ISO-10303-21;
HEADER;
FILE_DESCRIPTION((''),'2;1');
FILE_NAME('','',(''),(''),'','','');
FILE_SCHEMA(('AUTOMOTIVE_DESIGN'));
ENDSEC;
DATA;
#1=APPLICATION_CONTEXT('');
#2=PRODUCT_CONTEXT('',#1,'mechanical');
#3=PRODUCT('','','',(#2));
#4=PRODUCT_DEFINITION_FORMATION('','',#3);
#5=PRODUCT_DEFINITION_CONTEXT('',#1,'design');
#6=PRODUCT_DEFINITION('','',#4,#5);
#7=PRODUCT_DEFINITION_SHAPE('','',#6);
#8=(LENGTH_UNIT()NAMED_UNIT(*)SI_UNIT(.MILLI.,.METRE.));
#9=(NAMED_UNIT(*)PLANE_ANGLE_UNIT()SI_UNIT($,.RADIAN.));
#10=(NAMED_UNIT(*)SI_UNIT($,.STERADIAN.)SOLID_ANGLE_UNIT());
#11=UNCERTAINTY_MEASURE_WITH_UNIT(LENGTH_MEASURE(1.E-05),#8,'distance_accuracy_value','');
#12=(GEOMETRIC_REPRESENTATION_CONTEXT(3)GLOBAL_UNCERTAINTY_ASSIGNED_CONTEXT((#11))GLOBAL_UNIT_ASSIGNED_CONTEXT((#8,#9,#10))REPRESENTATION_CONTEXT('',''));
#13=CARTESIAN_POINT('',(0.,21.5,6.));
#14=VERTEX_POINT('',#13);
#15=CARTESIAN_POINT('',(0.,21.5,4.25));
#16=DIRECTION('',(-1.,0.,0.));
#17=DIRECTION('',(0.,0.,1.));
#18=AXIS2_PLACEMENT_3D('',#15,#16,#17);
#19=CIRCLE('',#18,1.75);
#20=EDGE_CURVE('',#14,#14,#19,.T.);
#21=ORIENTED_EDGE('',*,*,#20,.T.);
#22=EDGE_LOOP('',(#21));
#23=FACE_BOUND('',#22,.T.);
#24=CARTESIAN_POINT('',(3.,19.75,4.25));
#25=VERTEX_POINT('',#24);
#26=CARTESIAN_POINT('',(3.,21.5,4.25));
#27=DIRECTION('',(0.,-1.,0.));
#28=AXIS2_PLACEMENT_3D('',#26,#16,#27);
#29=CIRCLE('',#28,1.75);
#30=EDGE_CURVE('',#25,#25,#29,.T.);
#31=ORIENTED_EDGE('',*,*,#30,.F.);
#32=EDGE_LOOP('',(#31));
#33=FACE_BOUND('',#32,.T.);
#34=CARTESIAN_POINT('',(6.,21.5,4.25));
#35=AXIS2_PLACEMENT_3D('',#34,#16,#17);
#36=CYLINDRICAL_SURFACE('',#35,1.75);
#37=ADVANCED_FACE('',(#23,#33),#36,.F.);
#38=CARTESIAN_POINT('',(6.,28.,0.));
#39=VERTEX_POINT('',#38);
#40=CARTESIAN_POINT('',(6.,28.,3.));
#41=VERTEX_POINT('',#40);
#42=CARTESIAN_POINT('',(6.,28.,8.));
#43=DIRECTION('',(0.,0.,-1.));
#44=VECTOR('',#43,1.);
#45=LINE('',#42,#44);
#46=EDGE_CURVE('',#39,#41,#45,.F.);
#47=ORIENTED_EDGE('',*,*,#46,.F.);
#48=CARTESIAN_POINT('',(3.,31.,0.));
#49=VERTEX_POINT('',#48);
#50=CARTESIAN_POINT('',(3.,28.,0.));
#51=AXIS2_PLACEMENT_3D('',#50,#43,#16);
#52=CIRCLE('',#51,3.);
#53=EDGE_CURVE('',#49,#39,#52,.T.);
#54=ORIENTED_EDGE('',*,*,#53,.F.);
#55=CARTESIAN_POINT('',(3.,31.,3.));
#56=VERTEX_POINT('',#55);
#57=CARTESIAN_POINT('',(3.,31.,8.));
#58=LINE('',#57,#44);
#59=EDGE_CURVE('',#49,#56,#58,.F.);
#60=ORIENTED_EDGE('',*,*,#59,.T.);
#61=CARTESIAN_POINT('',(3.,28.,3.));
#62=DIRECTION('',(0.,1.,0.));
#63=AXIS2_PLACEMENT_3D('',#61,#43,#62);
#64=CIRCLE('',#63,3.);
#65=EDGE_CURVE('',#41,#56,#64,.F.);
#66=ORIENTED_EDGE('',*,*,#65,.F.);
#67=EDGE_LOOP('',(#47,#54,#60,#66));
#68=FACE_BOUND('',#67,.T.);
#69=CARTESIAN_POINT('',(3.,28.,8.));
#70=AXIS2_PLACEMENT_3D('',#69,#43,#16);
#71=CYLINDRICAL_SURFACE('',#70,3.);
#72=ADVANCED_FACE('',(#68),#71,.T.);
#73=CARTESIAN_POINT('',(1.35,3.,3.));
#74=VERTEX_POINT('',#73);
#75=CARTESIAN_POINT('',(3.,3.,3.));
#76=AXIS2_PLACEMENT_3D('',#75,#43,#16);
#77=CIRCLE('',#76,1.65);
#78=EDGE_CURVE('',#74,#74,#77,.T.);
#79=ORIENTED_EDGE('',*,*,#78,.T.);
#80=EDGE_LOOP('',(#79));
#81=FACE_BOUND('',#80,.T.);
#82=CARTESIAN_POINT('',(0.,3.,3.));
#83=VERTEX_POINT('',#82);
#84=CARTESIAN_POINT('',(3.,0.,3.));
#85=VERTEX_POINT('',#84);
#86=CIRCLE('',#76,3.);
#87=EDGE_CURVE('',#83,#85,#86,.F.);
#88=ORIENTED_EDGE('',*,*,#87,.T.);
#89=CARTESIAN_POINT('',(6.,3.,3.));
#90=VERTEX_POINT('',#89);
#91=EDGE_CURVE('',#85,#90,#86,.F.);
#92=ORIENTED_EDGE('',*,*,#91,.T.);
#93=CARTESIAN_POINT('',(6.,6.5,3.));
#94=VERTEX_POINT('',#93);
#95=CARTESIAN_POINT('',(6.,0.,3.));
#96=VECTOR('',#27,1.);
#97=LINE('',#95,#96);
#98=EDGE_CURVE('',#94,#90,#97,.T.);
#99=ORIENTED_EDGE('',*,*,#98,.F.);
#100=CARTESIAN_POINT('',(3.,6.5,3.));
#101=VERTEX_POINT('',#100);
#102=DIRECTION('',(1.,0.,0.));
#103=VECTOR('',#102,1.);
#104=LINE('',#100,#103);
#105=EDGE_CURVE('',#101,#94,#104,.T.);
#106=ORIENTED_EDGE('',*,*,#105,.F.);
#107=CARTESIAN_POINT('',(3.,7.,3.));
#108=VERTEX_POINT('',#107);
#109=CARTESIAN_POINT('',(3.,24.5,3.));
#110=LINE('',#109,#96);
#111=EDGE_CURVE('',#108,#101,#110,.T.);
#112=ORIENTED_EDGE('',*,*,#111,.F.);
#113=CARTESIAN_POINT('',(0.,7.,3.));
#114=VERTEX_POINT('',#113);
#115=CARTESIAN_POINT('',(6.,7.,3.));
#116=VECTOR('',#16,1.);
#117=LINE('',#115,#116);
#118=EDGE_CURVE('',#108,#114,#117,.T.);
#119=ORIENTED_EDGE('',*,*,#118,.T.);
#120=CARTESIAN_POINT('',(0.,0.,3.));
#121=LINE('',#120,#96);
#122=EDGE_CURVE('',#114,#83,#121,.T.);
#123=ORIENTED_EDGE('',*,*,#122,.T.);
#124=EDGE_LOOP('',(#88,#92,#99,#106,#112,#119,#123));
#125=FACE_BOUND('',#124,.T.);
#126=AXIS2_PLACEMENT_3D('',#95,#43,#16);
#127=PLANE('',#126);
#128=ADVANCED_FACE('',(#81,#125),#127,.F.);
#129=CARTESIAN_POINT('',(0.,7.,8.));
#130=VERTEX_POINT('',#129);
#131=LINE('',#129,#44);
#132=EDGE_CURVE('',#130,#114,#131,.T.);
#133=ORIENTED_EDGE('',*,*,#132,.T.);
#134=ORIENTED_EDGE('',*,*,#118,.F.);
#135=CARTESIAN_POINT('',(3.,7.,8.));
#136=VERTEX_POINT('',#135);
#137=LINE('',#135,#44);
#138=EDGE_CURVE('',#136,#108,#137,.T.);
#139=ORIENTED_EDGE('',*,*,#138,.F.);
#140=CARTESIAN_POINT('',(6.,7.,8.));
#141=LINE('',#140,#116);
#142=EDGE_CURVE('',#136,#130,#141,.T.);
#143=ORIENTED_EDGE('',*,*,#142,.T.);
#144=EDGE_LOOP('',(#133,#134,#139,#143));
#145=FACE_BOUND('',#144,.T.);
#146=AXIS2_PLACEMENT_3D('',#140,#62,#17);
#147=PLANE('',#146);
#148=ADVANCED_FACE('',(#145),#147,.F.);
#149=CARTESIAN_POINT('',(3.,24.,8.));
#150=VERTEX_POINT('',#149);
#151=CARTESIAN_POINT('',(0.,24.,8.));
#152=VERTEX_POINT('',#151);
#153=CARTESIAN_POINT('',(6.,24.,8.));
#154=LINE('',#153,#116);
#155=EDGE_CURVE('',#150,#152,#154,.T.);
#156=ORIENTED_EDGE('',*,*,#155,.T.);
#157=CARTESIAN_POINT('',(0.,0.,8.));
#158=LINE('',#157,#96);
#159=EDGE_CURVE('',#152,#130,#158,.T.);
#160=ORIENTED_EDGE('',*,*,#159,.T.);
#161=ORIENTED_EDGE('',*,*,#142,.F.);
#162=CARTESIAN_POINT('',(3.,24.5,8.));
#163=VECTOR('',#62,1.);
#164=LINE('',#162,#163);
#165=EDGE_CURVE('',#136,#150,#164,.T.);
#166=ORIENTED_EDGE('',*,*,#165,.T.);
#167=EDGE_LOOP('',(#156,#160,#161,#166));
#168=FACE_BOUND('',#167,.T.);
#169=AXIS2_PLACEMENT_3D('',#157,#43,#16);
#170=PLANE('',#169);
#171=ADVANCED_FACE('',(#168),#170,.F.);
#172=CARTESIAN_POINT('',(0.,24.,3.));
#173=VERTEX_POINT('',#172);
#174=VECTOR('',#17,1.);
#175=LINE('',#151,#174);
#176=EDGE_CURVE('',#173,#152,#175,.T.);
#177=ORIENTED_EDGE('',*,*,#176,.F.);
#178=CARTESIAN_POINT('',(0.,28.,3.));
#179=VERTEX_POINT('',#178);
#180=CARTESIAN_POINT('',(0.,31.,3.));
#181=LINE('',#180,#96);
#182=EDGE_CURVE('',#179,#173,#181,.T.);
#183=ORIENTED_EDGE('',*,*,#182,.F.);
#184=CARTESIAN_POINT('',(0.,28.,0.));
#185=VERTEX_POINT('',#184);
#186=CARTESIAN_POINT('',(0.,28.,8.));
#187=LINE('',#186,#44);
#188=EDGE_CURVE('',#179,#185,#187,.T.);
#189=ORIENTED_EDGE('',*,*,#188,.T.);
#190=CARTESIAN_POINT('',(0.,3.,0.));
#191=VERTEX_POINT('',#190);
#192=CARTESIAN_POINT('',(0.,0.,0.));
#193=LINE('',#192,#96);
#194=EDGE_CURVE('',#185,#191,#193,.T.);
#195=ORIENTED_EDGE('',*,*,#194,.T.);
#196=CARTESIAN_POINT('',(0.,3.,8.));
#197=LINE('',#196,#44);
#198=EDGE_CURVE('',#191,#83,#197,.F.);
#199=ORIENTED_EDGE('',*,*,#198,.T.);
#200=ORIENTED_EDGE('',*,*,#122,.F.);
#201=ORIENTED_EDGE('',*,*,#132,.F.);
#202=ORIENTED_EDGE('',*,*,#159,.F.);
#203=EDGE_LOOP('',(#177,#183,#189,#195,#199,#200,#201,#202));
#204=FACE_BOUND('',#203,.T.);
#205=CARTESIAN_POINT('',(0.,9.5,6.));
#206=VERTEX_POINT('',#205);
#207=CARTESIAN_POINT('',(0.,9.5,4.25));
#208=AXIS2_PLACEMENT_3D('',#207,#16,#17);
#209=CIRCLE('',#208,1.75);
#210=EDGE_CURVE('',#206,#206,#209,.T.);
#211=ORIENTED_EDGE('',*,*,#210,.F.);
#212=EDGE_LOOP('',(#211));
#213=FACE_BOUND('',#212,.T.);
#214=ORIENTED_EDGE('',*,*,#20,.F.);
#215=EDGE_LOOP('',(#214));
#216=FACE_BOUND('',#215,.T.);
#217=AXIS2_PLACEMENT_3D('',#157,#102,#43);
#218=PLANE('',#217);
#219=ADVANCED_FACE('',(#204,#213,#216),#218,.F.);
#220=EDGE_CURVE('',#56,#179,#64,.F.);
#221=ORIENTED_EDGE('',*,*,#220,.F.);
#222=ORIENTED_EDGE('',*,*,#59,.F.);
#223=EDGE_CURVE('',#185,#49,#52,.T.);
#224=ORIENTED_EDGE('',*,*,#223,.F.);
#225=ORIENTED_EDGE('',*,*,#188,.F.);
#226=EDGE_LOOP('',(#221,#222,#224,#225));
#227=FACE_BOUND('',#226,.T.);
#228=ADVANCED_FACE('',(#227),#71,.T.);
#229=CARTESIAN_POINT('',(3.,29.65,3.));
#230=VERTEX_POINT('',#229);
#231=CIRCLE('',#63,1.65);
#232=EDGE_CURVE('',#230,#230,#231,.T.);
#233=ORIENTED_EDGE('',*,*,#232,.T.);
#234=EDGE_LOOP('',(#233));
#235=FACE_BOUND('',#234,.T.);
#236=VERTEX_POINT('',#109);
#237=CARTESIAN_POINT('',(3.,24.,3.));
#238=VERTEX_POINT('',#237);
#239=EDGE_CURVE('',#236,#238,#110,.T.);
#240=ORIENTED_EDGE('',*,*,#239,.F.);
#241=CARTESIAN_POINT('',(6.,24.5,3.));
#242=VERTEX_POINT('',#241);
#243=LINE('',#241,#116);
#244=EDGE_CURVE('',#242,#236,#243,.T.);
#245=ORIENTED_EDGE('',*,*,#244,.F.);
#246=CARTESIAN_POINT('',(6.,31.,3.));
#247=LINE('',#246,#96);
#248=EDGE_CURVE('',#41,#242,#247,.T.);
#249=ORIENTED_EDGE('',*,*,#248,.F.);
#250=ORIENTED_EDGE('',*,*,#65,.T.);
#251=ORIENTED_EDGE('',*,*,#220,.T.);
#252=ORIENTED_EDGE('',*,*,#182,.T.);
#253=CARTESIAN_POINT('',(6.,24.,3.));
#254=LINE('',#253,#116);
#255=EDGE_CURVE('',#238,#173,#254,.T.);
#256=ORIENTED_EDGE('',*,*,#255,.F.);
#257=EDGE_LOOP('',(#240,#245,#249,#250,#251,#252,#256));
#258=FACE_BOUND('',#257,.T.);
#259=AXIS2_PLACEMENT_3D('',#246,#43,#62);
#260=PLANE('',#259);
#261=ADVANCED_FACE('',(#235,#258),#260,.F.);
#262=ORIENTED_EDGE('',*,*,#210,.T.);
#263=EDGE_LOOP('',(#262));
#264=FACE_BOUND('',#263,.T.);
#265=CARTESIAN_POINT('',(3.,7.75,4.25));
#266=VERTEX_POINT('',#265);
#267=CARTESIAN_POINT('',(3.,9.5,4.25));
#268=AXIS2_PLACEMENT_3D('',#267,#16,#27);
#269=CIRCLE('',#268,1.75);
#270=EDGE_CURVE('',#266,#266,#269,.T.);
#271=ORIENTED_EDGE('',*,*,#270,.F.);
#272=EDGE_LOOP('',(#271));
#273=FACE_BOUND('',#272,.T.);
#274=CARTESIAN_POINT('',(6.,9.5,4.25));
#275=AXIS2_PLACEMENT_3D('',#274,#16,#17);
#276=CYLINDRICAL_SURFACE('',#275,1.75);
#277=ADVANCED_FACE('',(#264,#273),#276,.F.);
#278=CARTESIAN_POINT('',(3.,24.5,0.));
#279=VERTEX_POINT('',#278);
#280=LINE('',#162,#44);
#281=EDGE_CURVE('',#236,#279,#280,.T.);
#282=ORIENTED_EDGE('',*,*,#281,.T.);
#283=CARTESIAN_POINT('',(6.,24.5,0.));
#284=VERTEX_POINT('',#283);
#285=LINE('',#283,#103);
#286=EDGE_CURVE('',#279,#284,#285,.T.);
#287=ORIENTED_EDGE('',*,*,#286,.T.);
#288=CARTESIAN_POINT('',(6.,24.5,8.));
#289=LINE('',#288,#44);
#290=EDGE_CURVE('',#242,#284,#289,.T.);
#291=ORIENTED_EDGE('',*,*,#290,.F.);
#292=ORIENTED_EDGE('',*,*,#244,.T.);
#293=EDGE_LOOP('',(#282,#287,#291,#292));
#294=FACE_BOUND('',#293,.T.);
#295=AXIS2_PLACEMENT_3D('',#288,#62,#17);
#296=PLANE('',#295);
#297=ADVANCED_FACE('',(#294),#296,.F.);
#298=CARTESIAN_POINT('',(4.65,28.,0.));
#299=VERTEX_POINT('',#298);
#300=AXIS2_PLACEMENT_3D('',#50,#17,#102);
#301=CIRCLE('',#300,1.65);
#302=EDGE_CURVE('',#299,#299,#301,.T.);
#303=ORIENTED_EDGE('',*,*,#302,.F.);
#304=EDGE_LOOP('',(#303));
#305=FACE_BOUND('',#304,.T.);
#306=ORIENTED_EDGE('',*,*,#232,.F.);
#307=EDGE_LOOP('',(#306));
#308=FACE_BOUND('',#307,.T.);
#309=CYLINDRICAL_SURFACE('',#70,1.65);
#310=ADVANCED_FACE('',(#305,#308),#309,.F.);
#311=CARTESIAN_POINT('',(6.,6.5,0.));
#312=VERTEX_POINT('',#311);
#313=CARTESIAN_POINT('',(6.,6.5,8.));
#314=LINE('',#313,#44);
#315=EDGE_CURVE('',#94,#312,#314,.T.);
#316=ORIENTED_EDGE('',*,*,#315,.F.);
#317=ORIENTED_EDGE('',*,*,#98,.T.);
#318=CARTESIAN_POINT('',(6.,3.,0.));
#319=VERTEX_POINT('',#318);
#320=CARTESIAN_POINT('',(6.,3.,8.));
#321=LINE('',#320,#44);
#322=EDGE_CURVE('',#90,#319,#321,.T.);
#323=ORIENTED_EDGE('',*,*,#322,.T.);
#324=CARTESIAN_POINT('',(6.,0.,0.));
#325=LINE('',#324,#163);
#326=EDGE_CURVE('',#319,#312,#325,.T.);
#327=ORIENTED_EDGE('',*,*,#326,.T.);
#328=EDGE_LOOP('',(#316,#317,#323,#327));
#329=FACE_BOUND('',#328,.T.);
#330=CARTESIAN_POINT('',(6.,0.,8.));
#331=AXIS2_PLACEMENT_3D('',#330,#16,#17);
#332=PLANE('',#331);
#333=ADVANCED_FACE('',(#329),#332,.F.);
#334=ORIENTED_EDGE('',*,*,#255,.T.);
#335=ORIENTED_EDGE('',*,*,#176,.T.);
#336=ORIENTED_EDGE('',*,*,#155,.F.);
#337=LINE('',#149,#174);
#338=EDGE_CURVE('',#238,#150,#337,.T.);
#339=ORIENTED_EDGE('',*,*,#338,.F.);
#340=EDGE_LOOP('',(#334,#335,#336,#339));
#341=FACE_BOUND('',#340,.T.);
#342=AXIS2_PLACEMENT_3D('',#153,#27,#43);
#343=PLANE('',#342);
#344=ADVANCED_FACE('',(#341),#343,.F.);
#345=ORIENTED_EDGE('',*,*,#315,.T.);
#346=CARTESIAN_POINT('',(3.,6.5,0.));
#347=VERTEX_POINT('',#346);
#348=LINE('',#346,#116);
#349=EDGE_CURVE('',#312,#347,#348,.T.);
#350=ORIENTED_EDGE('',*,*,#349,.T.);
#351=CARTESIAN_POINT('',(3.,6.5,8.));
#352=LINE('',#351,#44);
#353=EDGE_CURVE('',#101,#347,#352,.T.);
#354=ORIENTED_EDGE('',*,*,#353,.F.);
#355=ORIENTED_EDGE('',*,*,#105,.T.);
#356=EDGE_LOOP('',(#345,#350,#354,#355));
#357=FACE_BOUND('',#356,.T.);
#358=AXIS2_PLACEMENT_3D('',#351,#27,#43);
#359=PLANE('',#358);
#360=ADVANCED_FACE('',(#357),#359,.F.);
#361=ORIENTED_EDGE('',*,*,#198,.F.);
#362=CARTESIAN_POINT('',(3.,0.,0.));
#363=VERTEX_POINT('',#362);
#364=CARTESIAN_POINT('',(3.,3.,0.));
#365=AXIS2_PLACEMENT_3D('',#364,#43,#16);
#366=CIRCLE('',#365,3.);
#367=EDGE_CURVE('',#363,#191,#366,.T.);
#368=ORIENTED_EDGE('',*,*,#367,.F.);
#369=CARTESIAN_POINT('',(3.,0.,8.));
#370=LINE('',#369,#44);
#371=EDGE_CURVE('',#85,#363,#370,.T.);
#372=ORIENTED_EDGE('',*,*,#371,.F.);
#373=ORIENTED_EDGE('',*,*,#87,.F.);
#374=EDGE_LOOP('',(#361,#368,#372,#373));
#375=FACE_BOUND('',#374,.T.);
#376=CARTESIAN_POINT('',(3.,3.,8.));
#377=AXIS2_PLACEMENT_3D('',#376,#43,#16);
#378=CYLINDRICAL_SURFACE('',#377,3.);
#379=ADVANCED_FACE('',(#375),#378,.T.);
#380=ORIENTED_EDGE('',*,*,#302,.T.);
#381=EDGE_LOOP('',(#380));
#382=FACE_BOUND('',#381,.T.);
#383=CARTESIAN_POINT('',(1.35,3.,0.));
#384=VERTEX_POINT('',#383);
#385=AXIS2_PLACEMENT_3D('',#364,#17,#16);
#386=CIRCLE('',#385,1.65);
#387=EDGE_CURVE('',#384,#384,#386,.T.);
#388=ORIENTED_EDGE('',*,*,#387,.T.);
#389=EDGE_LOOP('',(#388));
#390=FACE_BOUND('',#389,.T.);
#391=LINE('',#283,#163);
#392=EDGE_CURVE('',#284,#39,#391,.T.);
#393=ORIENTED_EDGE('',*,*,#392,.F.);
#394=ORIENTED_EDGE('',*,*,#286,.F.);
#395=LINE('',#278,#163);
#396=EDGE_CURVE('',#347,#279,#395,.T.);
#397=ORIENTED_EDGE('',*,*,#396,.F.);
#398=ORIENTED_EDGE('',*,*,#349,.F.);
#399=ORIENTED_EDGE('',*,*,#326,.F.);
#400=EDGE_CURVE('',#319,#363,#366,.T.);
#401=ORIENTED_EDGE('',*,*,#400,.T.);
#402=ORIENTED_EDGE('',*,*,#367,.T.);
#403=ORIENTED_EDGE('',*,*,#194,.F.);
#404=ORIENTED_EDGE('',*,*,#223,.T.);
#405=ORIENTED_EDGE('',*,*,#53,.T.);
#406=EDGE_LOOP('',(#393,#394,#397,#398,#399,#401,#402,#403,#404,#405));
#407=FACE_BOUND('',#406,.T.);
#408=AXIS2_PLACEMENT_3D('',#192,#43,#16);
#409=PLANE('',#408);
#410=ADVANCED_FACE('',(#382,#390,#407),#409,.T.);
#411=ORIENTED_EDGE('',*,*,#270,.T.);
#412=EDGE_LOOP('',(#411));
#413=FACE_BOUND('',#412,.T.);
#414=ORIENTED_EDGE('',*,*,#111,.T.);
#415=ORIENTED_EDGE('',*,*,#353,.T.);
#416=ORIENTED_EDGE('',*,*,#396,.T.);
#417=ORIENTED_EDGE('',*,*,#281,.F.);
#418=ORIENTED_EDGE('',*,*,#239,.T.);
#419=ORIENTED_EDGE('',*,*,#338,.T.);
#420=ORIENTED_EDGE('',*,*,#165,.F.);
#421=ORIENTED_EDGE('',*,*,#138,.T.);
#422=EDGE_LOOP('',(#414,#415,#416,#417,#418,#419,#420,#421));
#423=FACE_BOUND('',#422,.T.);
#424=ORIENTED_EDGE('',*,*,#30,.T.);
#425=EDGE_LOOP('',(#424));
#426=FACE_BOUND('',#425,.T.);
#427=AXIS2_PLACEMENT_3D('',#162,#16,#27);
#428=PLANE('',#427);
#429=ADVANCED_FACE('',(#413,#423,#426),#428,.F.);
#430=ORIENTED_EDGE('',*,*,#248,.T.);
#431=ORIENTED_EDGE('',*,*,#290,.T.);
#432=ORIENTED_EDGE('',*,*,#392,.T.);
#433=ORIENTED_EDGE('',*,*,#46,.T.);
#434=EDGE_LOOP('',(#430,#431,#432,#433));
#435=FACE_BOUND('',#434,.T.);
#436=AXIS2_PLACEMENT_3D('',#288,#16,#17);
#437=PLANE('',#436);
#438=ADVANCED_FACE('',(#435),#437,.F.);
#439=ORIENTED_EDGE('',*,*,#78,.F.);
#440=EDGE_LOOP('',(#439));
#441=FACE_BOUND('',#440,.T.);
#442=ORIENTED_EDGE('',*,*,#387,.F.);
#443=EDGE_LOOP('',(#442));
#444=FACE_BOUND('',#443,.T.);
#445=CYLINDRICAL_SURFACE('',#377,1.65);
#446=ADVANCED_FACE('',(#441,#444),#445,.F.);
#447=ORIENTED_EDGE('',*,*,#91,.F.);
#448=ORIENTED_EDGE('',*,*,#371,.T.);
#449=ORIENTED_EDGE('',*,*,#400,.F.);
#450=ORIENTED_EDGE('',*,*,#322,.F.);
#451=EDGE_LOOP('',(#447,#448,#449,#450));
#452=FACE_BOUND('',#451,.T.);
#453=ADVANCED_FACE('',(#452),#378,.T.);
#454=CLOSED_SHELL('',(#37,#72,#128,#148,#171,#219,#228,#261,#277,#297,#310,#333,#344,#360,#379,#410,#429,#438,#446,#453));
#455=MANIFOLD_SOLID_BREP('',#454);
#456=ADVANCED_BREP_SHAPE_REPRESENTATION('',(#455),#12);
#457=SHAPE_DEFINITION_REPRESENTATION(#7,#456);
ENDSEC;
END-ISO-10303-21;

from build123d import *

# Parameters (mm, degrees)
ESQUISSE1_R             = 1.65
BOSS_EXTRU_1_DEPTH      = 8
ESQUISSE2_R             = 1.75
ENL_V_MAT_EXTRU_1_DEPTH = 33.57299495
CONG_1_R                = 3
ESQUISSE3_W             = 5
ESQUISSE3_H             = 7
ENL_V_MAT_EXTRU_2_DEPTH = 33.57299495


with BuildPart() as part:
    # Esquisse1 → Boss.-Extru.1 (new body)
    with BuildSketch(Plane.XY):
        Polygon((0, 0), (6, 0), (6, 6.5), (3, 6.5), (3, 24.5), (6, 24.5), (6, 31), (0, 31), align=None)
        with Locations((3, 28)):
            Circle(ESQUISSE1_R, mode=Mode.SUBTRACT)
        with Locations(Location((3, 3, 0), (0, 0, 180))):
            Circle(ESQUISSE1_R, mode=Mode.SUBTRACT)
    extrude(amount=BOSS_EXTRU_1_DEPTH)

    # Esquisse2 → Enlèv. mat.-Extru.1 (cut, through all)
    with BuildSketch(Plane.ZY):
        with Locations((4.25, 21.5)):
            Circle(ESQUISSE2_R)
        with Locations((4.25, 9.5)):
            Circle(ESQUISSE2_R)
    extrude(amount=-ENL_V_MAT_EXTRU_1_DEPTH, mode=Mode.SUBTRACT)

    # Congé1
    cong_1_edges = [part.edges().sort_by_distance(p)[0] for p in [
        (6, 0, 4),
        (0, 0, 4),
        (0, 31, 4),
        (6, 31, 4),
    ]]
    fillet(cong_1_edges, radius=CONG_1_R - 0.0001)  # a hair under: the kernel refuses the full size

    # Esquisse3 → Enlèv. mat.-Extru.2 (cut, through all)
    with BuildSketch(Plane.ZY):
        with Locations((5.5, 27.5)):
            Rectangle(ESQUISSE3_W, ESQUISSE3_H)
        with Locations((5.5, 3.5)):
            Rectangle(ESQUISSE3_W, ESQUISSE3_H)
    extrude(amount=-ENL_V_MAT_EXTRU_2_DEPTH, mode=Mode.SUBTRACT)


solid = part.part
